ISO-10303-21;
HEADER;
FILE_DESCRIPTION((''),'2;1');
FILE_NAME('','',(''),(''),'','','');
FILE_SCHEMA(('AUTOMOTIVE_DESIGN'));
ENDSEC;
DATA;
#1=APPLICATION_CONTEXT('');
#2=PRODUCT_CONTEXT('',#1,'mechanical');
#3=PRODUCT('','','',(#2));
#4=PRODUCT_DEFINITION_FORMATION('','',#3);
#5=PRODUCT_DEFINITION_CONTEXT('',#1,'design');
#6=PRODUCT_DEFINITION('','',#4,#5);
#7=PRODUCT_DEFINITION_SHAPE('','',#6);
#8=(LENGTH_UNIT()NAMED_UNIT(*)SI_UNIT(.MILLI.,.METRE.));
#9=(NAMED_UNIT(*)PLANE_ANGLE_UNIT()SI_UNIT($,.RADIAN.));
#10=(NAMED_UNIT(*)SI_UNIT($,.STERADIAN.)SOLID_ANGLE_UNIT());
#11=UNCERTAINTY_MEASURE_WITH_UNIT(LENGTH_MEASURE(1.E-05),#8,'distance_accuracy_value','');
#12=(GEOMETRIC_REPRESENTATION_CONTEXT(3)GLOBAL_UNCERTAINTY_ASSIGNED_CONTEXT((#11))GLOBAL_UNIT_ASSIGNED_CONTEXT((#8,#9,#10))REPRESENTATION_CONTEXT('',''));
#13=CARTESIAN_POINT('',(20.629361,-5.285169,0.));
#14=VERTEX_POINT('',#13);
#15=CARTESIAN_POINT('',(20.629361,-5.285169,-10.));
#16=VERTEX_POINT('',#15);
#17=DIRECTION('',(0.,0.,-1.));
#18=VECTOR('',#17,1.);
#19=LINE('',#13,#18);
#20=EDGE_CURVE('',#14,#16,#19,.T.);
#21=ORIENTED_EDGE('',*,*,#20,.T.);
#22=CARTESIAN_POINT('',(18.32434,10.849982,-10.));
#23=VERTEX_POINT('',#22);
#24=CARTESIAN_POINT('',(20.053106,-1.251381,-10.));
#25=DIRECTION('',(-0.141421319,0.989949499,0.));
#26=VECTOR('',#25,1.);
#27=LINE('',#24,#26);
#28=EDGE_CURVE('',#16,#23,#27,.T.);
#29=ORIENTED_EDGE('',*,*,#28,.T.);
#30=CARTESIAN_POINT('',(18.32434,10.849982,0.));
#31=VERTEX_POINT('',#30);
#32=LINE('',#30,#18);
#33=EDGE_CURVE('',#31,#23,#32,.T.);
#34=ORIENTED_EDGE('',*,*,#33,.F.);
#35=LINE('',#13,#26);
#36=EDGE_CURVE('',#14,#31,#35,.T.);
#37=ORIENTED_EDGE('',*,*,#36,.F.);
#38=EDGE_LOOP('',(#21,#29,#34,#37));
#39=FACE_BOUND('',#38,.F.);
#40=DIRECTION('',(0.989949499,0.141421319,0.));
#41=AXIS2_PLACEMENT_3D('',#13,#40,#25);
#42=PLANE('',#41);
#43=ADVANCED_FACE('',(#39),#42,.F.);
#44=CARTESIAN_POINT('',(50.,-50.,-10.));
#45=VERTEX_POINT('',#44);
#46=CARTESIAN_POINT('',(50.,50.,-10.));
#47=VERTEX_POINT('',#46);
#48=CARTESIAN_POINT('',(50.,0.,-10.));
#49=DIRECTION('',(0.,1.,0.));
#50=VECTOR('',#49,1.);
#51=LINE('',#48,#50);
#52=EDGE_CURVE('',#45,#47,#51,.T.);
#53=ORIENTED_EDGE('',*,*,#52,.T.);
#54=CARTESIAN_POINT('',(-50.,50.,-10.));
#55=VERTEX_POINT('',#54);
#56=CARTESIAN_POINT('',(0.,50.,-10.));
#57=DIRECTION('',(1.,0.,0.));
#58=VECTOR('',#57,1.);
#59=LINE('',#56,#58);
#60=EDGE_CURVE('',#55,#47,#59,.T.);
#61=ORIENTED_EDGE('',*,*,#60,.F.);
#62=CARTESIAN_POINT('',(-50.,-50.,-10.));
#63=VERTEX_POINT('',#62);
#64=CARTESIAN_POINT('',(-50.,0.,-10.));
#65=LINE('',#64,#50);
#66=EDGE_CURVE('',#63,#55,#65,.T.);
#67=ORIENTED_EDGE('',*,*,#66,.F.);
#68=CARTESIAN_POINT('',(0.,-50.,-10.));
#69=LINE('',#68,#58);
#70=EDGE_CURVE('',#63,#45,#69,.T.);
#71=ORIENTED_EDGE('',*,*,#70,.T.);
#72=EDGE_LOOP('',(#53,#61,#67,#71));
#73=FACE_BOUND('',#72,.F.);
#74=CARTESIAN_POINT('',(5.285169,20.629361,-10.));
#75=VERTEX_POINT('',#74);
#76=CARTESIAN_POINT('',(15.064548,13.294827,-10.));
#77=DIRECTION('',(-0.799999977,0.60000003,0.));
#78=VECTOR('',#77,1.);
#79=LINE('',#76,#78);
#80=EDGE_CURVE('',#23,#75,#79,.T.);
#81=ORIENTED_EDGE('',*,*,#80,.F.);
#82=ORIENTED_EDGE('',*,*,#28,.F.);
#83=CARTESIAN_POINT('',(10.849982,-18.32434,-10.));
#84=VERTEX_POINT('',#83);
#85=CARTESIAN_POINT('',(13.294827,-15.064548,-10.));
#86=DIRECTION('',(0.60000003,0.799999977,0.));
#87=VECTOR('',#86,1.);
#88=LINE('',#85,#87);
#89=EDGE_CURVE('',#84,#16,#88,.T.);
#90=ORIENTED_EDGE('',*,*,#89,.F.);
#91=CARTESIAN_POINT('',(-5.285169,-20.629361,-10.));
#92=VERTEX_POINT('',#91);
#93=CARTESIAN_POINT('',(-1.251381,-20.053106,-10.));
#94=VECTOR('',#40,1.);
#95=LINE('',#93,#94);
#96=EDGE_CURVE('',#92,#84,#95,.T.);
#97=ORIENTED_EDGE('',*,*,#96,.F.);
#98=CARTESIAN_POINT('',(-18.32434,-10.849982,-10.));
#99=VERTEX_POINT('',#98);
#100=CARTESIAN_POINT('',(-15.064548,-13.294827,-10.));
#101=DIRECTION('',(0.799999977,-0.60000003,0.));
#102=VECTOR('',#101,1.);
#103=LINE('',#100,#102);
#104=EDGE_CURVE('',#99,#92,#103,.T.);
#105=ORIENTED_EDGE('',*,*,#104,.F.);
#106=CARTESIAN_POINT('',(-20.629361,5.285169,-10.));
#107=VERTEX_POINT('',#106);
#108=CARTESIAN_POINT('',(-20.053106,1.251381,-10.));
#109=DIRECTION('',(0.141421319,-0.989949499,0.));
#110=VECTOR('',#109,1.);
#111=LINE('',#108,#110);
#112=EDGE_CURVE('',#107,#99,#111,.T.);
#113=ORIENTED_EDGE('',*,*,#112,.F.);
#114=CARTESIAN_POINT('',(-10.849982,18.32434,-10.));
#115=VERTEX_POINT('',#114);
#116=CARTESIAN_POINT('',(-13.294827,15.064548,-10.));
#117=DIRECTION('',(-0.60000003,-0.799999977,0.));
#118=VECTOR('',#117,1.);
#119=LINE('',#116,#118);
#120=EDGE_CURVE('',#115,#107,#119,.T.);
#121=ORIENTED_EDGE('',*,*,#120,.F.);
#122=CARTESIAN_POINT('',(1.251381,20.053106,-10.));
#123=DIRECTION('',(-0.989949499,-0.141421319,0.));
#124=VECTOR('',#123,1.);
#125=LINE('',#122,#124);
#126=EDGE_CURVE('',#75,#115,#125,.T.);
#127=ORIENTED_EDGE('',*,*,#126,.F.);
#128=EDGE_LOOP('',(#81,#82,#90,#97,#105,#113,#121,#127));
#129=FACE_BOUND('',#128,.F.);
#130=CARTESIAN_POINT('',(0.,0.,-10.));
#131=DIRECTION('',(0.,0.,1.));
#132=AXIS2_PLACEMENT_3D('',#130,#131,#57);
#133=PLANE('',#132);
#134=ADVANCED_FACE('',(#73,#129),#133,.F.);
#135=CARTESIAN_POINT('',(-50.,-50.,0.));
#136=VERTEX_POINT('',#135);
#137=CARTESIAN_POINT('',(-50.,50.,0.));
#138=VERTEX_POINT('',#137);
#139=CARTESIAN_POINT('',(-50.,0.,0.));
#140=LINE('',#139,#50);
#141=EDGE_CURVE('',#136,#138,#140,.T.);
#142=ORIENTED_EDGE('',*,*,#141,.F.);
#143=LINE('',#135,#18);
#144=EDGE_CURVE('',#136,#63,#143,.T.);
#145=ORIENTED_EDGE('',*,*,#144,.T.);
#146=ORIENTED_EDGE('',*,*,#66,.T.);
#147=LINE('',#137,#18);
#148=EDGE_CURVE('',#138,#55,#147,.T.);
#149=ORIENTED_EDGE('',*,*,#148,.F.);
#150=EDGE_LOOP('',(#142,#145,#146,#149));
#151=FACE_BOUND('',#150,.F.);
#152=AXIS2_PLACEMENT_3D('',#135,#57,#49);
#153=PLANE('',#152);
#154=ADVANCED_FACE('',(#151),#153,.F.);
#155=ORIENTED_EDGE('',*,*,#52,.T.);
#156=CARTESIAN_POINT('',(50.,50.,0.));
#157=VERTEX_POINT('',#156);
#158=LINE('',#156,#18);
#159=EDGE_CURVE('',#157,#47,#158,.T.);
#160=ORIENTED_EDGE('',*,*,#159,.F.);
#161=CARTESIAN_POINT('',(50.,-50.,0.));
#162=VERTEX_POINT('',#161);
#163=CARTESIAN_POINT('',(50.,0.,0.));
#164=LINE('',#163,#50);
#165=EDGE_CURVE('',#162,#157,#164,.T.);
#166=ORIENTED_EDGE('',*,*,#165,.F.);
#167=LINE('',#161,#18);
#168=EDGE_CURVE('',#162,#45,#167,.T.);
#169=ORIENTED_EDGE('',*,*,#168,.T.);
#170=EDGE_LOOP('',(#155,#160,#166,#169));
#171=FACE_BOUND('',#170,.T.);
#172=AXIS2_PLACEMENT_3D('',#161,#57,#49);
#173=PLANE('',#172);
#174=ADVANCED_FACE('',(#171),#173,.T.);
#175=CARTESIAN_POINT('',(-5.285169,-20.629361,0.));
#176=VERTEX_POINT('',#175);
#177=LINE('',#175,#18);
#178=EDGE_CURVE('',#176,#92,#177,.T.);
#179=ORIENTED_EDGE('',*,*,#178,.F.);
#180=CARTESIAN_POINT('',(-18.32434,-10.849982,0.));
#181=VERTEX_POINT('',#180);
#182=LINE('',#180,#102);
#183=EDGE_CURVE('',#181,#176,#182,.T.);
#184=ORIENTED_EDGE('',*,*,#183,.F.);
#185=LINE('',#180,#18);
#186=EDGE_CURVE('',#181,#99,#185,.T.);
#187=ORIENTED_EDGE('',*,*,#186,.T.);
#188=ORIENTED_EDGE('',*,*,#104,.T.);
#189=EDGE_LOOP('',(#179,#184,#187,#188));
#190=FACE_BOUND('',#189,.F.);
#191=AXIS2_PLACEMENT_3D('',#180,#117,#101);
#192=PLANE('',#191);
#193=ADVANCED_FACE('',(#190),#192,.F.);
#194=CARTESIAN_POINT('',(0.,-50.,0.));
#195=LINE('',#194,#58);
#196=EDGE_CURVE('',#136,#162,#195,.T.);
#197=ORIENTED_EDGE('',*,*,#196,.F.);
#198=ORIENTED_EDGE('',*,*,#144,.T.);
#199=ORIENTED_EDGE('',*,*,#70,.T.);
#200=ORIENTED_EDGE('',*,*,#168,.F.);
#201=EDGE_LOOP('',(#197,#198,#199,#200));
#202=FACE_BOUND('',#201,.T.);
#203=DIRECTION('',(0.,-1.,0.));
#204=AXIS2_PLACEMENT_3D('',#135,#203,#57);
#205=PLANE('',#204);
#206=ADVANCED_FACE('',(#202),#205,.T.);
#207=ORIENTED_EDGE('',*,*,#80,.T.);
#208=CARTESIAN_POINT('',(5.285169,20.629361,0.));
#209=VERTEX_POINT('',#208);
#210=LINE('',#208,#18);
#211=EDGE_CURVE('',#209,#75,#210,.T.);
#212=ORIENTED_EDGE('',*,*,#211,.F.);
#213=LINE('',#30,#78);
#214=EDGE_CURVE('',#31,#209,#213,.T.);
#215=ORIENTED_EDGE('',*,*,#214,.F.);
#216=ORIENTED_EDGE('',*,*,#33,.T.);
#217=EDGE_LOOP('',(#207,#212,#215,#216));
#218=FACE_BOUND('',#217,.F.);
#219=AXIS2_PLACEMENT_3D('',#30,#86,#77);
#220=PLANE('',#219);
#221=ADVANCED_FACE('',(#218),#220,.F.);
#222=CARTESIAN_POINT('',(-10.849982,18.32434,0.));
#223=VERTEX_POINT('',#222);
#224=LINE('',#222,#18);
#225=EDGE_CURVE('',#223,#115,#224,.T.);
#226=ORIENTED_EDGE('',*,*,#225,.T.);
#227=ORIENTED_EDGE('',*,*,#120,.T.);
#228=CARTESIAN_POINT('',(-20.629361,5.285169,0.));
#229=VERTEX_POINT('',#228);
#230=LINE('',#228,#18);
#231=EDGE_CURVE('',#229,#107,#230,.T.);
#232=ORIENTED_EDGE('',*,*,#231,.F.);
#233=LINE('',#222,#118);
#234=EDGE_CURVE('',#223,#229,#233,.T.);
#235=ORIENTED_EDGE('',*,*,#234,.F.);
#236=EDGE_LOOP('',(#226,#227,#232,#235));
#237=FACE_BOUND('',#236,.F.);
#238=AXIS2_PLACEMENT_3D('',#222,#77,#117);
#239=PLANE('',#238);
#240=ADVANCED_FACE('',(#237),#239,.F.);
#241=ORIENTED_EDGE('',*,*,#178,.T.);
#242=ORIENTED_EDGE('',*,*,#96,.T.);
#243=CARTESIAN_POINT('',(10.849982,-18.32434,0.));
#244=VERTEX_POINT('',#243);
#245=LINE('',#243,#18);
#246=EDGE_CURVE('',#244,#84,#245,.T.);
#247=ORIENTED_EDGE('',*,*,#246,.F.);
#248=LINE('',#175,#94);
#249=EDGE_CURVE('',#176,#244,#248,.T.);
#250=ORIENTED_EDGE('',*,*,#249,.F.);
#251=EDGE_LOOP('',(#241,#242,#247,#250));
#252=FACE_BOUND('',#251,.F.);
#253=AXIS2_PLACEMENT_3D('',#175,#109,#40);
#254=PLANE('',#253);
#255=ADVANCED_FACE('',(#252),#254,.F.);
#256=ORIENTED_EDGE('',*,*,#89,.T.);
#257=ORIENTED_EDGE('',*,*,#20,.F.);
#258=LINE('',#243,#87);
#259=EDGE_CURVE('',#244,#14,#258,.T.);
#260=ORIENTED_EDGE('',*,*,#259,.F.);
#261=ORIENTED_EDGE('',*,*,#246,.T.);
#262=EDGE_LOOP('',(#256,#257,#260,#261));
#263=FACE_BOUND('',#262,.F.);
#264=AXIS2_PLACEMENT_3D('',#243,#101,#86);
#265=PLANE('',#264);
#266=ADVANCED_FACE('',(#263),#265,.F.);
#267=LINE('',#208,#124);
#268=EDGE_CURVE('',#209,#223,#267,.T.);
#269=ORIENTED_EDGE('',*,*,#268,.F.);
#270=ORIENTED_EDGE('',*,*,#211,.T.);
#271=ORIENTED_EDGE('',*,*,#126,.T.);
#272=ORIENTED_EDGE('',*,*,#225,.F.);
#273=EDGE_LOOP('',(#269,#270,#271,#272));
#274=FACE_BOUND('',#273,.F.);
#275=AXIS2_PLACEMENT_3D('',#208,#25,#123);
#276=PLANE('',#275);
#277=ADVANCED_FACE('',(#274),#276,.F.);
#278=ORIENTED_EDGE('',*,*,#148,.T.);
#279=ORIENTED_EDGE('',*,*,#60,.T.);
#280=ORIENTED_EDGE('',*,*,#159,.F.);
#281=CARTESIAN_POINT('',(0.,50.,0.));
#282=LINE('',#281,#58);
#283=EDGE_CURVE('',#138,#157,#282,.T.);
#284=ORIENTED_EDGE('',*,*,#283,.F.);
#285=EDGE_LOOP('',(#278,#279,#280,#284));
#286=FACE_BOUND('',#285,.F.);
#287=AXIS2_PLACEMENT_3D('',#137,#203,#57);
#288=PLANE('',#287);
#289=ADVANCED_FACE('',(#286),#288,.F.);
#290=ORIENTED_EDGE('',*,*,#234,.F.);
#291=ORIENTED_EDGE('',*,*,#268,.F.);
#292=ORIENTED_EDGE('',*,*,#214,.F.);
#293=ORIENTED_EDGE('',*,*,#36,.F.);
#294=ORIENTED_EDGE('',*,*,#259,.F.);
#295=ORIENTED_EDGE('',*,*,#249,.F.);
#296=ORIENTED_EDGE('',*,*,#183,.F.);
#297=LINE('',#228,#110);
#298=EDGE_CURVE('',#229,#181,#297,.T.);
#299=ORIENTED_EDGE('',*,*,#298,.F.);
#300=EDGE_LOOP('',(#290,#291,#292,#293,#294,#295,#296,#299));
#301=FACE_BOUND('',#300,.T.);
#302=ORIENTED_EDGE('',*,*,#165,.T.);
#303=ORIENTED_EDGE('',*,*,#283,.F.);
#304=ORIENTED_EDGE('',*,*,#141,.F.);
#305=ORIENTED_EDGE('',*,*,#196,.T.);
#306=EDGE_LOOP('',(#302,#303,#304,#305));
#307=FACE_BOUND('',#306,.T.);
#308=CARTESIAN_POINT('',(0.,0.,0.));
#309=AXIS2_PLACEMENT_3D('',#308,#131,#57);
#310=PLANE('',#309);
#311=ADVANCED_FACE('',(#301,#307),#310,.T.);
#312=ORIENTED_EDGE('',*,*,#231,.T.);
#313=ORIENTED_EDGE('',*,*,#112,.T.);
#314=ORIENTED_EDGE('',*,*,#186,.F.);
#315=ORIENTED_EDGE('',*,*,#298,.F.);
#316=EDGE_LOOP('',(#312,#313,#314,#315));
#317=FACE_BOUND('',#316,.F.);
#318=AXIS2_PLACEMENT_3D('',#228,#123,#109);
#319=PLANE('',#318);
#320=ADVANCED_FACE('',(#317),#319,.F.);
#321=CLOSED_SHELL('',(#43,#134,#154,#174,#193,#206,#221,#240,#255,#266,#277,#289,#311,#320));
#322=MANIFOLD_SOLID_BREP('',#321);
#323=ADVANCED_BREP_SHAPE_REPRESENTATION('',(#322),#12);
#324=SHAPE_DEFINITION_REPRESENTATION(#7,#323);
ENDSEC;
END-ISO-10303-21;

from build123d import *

# Parameters (mm, degrees)
F0_W     = 100
F0_H     = 100
F1_DEPTH = 10
F3_DEPTH = 39.624


# Not quite as in the source:
# - a feature names something its author has since deleted; it is built from what else it names


with BuildPart() as f1:
    # F0 (on Top) → F1 (new body)
    with BuildSketch(Plane.XY):
        Rectangle(F0_W, F0_H)
    extrude(amount=-F1_DEPTH)

    # F2 (on face) → F3 (cut)
    with BuildSketch(Plane.XY):
        Polygon((10.8499823283, -18.3243404083), (20.6293614436, -5.2851692833), (18.3243404083, 10.8499823283), (5.2851692833, 20.6293614436), (-10.8499823283, 18.3243404083), (-20.6293614436, 5.2851692833), (-18.3243404083, -10.8499823283), (-5.2851692833, -20.6293614436), align=None)
    extrude(amount=-F3_DEPTH, mode=Mode.SUBTRACT)


solid = f1.part
